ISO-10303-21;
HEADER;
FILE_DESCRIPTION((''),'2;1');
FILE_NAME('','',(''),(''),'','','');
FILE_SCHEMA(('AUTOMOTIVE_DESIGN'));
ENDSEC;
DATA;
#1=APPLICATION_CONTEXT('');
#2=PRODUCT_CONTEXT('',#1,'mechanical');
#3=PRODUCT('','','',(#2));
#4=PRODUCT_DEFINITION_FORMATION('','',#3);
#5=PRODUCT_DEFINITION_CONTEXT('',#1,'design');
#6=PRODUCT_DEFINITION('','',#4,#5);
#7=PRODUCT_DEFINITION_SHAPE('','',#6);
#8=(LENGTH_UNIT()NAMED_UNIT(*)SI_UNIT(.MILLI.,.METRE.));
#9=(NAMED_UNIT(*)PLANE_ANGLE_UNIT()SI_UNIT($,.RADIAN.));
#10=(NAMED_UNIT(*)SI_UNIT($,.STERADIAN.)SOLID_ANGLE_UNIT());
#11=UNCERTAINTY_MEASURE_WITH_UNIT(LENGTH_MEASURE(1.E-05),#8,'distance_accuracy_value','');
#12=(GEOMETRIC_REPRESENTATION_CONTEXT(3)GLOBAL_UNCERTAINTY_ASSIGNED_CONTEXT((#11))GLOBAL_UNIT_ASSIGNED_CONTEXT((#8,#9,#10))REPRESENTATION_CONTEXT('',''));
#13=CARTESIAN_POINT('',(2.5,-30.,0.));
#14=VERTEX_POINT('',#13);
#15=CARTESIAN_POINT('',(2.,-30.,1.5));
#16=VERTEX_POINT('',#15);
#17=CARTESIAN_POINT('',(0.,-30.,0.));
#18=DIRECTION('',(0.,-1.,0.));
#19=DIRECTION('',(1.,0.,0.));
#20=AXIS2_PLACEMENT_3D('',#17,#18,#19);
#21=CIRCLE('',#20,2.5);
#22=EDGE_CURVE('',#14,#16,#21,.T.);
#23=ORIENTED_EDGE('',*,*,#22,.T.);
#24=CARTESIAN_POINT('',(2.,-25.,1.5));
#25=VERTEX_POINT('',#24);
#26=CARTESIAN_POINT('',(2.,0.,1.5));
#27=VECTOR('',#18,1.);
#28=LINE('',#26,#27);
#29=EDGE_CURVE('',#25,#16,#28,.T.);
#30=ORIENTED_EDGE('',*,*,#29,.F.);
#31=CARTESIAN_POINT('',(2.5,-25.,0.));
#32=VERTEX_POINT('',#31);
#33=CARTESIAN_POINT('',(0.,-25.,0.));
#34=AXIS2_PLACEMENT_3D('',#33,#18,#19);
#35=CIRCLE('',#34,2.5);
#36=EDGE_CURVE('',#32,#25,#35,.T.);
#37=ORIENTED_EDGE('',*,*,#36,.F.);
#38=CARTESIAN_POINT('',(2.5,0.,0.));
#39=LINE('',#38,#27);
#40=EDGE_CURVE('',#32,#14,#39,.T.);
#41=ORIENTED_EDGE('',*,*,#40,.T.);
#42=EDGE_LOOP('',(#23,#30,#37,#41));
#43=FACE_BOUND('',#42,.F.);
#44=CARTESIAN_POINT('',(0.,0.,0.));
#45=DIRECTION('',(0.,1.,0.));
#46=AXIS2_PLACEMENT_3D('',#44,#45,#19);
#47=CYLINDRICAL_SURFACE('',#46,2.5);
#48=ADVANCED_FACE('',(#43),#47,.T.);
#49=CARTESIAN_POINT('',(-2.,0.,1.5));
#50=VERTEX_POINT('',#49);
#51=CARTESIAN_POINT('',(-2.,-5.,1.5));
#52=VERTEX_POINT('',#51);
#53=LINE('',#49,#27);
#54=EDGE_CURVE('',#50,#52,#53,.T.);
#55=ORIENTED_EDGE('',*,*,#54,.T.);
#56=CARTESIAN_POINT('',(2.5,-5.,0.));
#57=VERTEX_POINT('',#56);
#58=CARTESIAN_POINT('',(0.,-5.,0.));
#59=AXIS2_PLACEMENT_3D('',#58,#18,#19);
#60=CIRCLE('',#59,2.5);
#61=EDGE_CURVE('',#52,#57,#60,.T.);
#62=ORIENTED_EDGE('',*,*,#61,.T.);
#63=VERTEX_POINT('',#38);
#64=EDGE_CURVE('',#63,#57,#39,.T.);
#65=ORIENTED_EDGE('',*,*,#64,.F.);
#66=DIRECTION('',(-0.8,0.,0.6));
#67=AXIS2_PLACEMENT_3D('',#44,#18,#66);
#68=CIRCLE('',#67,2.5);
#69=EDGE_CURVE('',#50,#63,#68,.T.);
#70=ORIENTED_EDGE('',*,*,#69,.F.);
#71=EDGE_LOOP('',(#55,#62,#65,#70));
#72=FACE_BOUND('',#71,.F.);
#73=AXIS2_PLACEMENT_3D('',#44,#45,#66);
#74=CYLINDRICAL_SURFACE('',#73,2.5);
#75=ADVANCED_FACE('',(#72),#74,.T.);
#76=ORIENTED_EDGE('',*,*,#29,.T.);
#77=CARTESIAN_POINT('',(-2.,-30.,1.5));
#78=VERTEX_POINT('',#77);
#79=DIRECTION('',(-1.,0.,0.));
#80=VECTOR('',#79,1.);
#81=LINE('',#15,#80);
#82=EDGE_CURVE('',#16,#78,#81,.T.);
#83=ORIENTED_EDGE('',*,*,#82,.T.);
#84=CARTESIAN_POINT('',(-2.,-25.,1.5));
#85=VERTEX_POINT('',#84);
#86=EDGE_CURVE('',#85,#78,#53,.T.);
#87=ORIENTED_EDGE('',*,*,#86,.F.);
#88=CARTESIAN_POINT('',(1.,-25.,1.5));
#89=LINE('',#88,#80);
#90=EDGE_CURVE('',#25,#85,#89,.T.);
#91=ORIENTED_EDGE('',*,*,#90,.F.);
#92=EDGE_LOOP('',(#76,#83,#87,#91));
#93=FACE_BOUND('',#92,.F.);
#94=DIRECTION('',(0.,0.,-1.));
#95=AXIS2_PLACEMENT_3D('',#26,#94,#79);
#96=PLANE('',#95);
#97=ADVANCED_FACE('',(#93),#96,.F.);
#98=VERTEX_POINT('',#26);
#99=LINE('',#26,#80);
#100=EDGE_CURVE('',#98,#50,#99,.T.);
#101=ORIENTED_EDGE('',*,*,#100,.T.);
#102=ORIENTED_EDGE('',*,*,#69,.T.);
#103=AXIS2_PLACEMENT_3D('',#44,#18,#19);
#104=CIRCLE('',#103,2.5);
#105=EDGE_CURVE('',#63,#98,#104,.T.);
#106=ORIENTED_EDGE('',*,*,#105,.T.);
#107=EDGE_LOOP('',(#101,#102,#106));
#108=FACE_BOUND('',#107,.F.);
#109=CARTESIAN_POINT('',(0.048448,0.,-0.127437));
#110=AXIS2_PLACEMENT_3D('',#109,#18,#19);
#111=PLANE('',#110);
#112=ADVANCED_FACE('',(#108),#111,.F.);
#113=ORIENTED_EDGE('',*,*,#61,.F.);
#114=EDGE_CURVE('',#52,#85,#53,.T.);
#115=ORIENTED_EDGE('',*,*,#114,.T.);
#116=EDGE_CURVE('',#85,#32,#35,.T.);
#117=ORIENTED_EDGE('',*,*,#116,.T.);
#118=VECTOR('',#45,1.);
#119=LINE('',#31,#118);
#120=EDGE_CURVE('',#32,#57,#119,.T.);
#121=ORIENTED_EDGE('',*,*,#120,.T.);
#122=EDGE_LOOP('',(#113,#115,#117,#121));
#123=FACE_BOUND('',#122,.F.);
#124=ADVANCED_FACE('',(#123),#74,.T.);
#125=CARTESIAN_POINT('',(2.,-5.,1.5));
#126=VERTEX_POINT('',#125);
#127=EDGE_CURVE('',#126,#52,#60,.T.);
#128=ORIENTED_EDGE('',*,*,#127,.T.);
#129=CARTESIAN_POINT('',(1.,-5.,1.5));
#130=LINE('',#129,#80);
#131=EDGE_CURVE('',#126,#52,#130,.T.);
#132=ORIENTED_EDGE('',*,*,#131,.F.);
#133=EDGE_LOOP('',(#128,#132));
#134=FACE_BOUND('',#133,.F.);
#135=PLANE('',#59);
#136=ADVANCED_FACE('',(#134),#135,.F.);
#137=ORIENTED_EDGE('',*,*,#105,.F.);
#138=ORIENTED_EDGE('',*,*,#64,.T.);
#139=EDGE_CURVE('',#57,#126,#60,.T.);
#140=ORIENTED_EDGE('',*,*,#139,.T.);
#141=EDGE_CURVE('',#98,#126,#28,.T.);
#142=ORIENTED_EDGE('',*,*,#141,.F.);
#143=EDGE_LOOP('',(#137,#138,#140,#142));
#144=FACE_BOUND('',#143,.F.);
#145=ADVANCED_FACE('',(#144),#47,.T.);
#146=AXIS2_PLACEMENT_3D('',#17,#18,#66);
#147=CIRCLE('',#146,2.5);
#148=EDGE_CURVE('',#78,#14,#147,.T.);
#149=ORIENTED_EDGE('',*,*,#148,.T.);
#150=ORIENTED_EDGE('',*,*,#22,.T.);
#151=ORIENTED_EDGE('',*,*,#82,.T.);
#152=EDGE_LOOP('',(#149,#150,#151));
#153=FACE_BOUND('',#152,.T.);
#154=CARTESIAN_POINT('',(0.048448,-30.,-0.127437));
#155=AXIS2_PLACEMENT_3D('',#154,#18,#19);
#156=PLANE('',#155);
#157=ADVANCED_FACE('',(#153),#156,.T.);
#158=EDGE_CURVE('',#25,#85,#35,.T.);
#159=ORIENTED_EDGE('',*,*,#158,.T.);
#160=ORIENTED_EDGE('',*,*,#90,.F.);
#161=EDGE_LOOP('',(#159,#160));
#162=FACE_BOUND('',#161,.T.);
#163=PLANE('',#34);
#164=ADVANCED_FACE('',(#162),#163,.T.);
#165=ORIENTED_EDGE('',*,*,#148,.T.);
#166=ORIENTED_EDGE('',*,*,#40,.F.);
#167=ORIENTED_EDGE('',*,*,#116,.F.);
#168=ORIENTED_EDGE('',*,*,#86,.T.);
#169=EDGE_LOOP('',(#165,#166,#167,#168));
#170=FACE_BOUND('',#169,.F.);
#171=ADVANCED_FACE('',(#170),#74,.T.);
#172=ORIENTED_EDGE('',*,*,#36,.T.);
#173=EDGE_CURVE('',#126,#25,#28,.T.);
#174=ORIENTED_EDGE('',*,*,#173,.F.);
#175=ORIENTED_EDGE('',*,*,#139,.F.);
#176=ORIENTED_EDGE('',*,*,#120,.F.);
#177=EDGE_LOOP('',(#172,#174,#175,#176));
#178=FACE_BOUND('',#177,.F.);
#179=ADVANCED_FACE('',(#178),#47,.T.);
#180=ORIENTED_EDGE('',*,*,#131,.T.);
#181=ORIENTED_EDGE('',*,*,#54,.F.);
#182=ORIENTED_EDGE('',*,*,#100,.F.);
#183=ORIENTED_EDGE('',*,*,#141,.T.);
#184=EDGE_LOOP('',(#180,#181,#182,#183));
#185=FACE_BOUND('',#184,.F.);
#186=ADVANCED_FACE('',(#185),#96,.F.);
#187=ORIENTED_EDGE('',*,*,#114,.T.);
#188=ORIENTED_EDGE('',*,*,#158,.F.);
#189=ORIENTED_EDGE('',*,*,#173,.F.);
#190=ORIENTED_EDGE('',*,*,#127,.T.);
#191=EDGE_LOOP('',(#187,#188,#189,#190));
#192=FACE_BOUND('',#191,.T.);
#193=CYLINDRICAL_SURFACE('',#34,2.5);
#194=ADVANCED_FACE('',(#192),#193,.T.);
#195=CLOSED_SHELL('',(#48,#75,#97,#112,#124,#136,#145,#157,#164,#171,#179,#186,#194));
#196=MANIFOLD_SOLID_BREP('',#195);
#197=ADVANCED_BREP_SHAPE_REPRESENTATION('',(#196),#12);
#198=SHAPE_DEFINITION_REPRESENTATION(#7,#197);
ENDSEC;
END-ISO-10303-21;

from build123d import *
from build123d import SkipClean  # not in build123d's __all__

# Parameters (mm, degrees)
F1_DEPTH = 30
F3_START = -5
F2_R     = 2.5
F3_DEPTH = 20


with BuildPart() as f1:
    # F0 (on Front) → F1 (new body)
    with BuildSketch(Plane.XZ):
        with BuildLine():
            ThreePointArc((-2, 1.5), (-0.790569415, -2.3717082451), (2.5, 0))
            ThreePointArc((2.5, 0), (2.3717082451, 0.790569415), (2, 1.5))
            Line((2, 1.5), (-2, 1.5))
        make_face()
    extrude(amount=F1_DEPTH)

    # F2 (on face) → F3 (join)
    with BuildSketch(Plane.XZ.offset(30).offset(F3_START)):
        Circle(F2_R)
    with SkipClean():  # cleaning this boolean's faces spoils the solid; the shape is the same uncleaned
        extrude(amount=-F3_DEPTH)


solid = f1.part
